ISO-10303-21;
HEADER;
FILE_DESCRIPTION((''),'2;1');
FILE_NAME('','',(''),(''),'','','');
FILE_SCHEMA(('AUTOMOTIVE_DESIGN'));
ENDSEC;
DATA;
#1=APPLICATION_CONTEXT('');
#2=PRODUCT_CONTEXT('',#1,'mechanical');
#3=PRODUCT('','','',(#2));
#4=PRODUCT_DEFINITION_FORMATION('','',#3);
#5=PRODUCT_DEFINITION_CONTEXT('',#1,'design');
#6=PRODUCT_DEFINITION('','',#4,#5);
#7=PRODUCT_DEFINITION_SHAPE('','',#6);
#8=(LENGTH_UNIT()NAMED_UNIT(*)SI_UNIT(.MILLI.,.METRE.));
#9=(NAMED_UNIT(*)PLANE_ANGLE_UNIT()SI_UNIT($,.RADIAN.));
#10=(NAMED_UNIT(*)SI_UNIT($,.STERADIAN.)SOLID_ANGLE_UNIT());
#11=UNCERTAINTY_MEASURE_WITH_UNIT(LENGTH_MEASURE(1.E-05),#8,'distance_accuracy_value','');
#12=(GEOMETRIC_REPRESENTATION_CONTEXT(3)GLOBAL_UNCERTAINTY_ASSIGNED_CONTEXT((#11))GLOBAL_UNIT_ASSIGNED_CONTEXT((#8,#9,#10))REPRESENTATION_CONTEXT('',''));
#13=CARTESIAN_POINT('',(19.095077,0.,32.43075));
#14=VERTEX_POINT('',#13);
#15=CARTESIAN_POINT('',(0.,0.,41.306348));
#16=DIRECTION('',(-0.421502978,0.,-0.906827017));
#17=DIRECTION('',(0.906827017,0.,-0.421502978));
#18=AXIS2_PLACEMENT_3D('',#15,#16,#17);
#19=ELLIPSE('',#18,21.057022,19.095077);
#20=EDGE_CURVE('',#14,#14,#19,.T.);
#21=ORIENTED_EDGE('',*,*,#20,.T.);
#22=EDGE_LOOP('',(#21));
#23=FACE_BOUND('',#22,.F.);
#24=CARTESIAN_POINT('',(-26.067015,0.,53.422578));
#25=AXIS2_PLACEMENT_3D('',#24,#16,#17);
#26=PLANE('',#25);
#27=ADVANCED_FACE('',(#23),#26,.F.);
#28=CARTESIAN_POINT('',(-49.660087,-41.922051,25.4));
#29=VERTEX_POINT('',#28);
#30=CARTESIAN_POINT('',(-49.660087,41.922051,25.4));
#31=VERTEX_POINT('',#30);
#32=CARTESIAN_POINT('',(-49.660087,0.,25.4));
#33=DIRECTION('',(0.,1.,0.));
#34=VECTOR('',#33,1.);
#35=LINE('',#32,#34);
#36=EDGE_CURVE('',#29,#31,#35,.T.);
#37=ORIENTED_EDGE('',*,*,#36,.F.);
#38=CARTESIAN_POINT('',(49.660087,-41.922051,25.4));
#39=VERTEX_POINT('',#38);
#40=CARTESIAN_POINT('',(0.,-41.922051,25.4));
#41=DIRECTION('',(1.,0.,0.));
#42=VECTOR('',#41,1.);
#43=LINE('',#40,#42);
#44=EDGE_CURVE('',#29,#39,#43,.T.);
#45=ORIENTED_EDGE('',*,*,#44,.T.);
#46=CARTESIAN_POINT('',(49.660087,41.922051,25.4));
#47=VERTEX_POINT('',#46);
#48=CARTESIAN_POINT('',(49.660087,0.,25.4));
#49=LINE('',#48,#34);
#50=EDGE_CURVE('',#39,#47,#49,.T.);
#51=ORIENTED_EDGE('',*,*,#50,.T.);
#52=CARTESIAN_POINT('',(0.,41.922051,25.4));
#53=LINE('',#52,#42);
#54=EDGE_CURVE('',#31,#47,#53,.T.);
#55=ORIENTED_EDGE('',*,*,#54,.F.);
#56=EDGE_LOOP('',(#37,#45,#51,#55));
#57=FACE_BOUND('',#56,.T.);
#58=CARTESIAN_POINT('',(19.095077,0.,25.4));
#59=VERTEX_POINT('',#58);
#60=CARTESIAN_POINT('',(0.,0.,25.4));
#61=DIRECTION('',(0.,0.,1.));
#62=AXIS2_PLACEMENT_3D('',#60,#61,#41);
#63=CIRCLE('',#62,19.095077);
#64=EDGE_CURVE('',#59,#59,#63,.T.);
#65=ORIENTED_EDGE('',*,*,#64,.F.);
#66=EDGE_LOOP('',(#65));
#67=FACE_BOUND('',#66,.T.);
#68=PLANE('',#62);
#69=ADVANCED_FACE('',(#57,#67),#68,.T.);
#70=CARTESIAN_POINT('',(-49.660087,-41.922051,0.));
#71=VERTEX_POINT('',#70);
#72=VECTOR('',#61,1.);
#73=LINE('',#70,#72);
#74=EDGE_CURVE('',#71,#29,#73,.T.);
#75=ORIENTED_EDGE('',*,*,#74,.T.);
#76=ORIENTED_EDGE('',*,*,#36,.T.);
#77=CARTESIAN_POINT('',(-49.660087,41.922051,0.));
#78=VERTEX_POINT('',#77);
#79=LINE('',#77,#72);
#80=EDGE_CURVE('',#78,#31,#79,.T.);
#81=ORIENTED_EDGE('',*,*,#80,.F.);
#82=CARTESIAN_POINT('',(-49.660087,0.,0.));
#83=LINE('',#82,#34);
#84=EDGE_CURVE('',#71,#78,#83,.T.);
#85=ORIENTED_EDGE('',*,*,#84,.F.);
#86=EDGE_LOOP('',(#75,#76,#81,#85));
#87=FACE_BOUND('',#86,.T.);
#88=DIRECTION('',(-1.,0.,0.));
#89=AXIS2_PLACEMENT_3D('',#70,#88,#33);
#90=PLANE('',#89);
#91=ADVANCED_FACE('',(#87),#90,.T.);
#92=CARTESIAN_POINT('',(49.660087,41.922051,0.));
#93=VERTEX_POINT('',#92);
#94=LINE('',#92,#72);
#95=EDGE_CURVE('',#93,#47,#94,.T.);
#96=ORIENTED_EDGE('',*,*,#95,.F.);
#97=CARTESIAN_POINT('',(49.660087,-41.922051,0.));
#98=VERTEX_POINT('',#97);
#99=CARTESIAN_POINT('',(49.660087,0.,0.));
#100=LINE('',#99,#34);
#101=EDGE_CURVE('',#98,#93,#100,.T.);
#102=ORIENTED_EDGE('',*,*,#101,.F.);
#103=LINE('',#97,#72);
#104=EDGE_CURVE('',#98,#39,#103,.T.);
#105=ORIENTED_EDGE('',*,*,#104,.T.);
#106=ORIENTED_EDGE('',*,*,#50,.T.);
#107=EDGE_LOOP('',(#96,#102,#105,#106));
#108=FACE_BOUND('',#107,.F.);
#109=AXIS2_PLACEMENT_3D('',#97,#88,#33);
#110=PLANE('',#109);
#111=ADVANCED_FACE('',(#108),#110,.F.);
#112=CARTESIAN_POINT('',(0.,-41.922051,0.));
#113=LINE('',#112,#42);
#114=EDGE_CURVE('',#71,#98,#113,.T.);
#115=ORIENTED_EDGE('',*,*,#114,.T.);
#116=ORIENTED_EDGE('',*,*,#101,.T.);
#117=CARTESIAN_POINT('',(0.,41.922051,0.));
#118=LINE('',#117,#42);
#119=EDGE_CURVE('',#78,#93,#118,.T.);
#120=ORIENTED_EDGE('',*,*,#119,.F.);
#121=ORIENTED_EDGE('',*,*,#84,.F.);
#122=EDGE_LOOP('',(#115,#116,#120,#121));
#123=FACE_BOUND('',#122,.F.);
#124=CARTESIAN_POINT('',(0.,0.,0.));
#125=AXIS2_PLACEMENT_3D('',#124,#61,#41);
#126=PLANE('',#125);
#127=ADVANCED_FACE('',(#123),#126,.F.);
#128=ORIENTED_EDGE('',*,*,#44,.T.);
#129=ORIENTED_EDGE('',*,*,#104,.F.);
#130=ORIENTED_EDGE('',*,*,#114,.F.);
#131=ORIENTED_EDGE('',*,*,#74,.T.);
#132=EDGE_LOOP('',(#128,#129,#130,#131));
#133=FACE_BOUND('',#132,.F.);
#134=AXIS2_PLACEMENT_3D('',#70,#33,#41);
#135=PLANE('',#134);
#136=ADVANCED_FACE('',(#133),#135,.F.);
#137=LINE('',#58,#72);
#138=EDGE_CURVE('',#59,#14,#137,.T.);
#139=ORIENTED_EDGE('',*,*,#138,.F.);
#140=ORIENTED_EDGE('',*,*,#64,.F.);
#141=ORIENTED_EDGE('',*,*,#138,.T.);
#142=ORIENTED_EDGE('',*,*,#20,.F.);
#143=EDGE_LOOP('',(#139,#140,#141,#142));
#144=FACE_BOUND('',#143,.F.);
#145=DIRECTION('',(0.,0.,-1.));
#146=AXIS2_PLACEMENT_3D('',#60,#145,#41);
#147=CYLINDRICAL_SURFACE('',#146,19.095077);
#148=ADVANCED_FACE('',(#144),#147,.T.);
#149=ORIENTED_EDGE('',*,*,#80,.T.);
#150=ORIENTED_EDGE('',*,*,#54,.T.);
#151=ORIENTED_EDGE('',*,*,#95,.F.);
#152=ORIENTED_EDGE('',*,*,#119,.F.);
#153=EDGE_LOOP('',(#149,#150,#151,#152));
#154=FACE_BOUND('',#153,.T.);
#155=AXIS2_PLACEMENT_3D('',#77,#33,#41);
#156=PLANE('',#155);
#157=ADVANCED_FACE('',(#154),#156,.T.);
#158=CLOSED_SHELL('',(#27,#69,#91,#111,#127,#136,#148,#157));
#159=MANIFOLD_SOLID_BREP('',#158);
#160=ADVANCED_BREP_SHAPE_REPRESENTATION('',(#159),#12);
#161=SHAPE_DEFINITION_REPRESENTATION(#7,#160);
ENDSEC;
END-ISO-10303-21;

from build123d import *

# Parameters (mm, degrees)
F0_W     = 99.3201732635
F0_H     = 83.8441029191
F1_DEPTH = 25.4
F2_R     = 19.0950766662
F3_DEPTH = 25.4
F5_DEPTH = 44.35832


with BuildPart() as f1:
    # F0 (on Top) → F1 (new body)
    with BuildSketch(Plane.XY):
        Rectangle(F0_W, F0_H)
    extrude(amount=F1_DEPTH)

    # F2 (on face) → F3 (join)
    with BuildSketch(Plane.XY.offset(25.4)):
        Circle(F2_R)
    extrude(amount=F3_DEPTH)

    # F4 (on Front) → F5 (cut, symmetric)
    with BuildSketch(Plane.XZ):
        Polygon((21.8941513449, 53.4225776792), (-26.0670147836, 53.4225776792), (21.8941513449, 31.1297103763), align=None)
    extrude(amount=F5_DEPTH, both=True, mode=Mode.SUBTRACT)


solid = f1.part
